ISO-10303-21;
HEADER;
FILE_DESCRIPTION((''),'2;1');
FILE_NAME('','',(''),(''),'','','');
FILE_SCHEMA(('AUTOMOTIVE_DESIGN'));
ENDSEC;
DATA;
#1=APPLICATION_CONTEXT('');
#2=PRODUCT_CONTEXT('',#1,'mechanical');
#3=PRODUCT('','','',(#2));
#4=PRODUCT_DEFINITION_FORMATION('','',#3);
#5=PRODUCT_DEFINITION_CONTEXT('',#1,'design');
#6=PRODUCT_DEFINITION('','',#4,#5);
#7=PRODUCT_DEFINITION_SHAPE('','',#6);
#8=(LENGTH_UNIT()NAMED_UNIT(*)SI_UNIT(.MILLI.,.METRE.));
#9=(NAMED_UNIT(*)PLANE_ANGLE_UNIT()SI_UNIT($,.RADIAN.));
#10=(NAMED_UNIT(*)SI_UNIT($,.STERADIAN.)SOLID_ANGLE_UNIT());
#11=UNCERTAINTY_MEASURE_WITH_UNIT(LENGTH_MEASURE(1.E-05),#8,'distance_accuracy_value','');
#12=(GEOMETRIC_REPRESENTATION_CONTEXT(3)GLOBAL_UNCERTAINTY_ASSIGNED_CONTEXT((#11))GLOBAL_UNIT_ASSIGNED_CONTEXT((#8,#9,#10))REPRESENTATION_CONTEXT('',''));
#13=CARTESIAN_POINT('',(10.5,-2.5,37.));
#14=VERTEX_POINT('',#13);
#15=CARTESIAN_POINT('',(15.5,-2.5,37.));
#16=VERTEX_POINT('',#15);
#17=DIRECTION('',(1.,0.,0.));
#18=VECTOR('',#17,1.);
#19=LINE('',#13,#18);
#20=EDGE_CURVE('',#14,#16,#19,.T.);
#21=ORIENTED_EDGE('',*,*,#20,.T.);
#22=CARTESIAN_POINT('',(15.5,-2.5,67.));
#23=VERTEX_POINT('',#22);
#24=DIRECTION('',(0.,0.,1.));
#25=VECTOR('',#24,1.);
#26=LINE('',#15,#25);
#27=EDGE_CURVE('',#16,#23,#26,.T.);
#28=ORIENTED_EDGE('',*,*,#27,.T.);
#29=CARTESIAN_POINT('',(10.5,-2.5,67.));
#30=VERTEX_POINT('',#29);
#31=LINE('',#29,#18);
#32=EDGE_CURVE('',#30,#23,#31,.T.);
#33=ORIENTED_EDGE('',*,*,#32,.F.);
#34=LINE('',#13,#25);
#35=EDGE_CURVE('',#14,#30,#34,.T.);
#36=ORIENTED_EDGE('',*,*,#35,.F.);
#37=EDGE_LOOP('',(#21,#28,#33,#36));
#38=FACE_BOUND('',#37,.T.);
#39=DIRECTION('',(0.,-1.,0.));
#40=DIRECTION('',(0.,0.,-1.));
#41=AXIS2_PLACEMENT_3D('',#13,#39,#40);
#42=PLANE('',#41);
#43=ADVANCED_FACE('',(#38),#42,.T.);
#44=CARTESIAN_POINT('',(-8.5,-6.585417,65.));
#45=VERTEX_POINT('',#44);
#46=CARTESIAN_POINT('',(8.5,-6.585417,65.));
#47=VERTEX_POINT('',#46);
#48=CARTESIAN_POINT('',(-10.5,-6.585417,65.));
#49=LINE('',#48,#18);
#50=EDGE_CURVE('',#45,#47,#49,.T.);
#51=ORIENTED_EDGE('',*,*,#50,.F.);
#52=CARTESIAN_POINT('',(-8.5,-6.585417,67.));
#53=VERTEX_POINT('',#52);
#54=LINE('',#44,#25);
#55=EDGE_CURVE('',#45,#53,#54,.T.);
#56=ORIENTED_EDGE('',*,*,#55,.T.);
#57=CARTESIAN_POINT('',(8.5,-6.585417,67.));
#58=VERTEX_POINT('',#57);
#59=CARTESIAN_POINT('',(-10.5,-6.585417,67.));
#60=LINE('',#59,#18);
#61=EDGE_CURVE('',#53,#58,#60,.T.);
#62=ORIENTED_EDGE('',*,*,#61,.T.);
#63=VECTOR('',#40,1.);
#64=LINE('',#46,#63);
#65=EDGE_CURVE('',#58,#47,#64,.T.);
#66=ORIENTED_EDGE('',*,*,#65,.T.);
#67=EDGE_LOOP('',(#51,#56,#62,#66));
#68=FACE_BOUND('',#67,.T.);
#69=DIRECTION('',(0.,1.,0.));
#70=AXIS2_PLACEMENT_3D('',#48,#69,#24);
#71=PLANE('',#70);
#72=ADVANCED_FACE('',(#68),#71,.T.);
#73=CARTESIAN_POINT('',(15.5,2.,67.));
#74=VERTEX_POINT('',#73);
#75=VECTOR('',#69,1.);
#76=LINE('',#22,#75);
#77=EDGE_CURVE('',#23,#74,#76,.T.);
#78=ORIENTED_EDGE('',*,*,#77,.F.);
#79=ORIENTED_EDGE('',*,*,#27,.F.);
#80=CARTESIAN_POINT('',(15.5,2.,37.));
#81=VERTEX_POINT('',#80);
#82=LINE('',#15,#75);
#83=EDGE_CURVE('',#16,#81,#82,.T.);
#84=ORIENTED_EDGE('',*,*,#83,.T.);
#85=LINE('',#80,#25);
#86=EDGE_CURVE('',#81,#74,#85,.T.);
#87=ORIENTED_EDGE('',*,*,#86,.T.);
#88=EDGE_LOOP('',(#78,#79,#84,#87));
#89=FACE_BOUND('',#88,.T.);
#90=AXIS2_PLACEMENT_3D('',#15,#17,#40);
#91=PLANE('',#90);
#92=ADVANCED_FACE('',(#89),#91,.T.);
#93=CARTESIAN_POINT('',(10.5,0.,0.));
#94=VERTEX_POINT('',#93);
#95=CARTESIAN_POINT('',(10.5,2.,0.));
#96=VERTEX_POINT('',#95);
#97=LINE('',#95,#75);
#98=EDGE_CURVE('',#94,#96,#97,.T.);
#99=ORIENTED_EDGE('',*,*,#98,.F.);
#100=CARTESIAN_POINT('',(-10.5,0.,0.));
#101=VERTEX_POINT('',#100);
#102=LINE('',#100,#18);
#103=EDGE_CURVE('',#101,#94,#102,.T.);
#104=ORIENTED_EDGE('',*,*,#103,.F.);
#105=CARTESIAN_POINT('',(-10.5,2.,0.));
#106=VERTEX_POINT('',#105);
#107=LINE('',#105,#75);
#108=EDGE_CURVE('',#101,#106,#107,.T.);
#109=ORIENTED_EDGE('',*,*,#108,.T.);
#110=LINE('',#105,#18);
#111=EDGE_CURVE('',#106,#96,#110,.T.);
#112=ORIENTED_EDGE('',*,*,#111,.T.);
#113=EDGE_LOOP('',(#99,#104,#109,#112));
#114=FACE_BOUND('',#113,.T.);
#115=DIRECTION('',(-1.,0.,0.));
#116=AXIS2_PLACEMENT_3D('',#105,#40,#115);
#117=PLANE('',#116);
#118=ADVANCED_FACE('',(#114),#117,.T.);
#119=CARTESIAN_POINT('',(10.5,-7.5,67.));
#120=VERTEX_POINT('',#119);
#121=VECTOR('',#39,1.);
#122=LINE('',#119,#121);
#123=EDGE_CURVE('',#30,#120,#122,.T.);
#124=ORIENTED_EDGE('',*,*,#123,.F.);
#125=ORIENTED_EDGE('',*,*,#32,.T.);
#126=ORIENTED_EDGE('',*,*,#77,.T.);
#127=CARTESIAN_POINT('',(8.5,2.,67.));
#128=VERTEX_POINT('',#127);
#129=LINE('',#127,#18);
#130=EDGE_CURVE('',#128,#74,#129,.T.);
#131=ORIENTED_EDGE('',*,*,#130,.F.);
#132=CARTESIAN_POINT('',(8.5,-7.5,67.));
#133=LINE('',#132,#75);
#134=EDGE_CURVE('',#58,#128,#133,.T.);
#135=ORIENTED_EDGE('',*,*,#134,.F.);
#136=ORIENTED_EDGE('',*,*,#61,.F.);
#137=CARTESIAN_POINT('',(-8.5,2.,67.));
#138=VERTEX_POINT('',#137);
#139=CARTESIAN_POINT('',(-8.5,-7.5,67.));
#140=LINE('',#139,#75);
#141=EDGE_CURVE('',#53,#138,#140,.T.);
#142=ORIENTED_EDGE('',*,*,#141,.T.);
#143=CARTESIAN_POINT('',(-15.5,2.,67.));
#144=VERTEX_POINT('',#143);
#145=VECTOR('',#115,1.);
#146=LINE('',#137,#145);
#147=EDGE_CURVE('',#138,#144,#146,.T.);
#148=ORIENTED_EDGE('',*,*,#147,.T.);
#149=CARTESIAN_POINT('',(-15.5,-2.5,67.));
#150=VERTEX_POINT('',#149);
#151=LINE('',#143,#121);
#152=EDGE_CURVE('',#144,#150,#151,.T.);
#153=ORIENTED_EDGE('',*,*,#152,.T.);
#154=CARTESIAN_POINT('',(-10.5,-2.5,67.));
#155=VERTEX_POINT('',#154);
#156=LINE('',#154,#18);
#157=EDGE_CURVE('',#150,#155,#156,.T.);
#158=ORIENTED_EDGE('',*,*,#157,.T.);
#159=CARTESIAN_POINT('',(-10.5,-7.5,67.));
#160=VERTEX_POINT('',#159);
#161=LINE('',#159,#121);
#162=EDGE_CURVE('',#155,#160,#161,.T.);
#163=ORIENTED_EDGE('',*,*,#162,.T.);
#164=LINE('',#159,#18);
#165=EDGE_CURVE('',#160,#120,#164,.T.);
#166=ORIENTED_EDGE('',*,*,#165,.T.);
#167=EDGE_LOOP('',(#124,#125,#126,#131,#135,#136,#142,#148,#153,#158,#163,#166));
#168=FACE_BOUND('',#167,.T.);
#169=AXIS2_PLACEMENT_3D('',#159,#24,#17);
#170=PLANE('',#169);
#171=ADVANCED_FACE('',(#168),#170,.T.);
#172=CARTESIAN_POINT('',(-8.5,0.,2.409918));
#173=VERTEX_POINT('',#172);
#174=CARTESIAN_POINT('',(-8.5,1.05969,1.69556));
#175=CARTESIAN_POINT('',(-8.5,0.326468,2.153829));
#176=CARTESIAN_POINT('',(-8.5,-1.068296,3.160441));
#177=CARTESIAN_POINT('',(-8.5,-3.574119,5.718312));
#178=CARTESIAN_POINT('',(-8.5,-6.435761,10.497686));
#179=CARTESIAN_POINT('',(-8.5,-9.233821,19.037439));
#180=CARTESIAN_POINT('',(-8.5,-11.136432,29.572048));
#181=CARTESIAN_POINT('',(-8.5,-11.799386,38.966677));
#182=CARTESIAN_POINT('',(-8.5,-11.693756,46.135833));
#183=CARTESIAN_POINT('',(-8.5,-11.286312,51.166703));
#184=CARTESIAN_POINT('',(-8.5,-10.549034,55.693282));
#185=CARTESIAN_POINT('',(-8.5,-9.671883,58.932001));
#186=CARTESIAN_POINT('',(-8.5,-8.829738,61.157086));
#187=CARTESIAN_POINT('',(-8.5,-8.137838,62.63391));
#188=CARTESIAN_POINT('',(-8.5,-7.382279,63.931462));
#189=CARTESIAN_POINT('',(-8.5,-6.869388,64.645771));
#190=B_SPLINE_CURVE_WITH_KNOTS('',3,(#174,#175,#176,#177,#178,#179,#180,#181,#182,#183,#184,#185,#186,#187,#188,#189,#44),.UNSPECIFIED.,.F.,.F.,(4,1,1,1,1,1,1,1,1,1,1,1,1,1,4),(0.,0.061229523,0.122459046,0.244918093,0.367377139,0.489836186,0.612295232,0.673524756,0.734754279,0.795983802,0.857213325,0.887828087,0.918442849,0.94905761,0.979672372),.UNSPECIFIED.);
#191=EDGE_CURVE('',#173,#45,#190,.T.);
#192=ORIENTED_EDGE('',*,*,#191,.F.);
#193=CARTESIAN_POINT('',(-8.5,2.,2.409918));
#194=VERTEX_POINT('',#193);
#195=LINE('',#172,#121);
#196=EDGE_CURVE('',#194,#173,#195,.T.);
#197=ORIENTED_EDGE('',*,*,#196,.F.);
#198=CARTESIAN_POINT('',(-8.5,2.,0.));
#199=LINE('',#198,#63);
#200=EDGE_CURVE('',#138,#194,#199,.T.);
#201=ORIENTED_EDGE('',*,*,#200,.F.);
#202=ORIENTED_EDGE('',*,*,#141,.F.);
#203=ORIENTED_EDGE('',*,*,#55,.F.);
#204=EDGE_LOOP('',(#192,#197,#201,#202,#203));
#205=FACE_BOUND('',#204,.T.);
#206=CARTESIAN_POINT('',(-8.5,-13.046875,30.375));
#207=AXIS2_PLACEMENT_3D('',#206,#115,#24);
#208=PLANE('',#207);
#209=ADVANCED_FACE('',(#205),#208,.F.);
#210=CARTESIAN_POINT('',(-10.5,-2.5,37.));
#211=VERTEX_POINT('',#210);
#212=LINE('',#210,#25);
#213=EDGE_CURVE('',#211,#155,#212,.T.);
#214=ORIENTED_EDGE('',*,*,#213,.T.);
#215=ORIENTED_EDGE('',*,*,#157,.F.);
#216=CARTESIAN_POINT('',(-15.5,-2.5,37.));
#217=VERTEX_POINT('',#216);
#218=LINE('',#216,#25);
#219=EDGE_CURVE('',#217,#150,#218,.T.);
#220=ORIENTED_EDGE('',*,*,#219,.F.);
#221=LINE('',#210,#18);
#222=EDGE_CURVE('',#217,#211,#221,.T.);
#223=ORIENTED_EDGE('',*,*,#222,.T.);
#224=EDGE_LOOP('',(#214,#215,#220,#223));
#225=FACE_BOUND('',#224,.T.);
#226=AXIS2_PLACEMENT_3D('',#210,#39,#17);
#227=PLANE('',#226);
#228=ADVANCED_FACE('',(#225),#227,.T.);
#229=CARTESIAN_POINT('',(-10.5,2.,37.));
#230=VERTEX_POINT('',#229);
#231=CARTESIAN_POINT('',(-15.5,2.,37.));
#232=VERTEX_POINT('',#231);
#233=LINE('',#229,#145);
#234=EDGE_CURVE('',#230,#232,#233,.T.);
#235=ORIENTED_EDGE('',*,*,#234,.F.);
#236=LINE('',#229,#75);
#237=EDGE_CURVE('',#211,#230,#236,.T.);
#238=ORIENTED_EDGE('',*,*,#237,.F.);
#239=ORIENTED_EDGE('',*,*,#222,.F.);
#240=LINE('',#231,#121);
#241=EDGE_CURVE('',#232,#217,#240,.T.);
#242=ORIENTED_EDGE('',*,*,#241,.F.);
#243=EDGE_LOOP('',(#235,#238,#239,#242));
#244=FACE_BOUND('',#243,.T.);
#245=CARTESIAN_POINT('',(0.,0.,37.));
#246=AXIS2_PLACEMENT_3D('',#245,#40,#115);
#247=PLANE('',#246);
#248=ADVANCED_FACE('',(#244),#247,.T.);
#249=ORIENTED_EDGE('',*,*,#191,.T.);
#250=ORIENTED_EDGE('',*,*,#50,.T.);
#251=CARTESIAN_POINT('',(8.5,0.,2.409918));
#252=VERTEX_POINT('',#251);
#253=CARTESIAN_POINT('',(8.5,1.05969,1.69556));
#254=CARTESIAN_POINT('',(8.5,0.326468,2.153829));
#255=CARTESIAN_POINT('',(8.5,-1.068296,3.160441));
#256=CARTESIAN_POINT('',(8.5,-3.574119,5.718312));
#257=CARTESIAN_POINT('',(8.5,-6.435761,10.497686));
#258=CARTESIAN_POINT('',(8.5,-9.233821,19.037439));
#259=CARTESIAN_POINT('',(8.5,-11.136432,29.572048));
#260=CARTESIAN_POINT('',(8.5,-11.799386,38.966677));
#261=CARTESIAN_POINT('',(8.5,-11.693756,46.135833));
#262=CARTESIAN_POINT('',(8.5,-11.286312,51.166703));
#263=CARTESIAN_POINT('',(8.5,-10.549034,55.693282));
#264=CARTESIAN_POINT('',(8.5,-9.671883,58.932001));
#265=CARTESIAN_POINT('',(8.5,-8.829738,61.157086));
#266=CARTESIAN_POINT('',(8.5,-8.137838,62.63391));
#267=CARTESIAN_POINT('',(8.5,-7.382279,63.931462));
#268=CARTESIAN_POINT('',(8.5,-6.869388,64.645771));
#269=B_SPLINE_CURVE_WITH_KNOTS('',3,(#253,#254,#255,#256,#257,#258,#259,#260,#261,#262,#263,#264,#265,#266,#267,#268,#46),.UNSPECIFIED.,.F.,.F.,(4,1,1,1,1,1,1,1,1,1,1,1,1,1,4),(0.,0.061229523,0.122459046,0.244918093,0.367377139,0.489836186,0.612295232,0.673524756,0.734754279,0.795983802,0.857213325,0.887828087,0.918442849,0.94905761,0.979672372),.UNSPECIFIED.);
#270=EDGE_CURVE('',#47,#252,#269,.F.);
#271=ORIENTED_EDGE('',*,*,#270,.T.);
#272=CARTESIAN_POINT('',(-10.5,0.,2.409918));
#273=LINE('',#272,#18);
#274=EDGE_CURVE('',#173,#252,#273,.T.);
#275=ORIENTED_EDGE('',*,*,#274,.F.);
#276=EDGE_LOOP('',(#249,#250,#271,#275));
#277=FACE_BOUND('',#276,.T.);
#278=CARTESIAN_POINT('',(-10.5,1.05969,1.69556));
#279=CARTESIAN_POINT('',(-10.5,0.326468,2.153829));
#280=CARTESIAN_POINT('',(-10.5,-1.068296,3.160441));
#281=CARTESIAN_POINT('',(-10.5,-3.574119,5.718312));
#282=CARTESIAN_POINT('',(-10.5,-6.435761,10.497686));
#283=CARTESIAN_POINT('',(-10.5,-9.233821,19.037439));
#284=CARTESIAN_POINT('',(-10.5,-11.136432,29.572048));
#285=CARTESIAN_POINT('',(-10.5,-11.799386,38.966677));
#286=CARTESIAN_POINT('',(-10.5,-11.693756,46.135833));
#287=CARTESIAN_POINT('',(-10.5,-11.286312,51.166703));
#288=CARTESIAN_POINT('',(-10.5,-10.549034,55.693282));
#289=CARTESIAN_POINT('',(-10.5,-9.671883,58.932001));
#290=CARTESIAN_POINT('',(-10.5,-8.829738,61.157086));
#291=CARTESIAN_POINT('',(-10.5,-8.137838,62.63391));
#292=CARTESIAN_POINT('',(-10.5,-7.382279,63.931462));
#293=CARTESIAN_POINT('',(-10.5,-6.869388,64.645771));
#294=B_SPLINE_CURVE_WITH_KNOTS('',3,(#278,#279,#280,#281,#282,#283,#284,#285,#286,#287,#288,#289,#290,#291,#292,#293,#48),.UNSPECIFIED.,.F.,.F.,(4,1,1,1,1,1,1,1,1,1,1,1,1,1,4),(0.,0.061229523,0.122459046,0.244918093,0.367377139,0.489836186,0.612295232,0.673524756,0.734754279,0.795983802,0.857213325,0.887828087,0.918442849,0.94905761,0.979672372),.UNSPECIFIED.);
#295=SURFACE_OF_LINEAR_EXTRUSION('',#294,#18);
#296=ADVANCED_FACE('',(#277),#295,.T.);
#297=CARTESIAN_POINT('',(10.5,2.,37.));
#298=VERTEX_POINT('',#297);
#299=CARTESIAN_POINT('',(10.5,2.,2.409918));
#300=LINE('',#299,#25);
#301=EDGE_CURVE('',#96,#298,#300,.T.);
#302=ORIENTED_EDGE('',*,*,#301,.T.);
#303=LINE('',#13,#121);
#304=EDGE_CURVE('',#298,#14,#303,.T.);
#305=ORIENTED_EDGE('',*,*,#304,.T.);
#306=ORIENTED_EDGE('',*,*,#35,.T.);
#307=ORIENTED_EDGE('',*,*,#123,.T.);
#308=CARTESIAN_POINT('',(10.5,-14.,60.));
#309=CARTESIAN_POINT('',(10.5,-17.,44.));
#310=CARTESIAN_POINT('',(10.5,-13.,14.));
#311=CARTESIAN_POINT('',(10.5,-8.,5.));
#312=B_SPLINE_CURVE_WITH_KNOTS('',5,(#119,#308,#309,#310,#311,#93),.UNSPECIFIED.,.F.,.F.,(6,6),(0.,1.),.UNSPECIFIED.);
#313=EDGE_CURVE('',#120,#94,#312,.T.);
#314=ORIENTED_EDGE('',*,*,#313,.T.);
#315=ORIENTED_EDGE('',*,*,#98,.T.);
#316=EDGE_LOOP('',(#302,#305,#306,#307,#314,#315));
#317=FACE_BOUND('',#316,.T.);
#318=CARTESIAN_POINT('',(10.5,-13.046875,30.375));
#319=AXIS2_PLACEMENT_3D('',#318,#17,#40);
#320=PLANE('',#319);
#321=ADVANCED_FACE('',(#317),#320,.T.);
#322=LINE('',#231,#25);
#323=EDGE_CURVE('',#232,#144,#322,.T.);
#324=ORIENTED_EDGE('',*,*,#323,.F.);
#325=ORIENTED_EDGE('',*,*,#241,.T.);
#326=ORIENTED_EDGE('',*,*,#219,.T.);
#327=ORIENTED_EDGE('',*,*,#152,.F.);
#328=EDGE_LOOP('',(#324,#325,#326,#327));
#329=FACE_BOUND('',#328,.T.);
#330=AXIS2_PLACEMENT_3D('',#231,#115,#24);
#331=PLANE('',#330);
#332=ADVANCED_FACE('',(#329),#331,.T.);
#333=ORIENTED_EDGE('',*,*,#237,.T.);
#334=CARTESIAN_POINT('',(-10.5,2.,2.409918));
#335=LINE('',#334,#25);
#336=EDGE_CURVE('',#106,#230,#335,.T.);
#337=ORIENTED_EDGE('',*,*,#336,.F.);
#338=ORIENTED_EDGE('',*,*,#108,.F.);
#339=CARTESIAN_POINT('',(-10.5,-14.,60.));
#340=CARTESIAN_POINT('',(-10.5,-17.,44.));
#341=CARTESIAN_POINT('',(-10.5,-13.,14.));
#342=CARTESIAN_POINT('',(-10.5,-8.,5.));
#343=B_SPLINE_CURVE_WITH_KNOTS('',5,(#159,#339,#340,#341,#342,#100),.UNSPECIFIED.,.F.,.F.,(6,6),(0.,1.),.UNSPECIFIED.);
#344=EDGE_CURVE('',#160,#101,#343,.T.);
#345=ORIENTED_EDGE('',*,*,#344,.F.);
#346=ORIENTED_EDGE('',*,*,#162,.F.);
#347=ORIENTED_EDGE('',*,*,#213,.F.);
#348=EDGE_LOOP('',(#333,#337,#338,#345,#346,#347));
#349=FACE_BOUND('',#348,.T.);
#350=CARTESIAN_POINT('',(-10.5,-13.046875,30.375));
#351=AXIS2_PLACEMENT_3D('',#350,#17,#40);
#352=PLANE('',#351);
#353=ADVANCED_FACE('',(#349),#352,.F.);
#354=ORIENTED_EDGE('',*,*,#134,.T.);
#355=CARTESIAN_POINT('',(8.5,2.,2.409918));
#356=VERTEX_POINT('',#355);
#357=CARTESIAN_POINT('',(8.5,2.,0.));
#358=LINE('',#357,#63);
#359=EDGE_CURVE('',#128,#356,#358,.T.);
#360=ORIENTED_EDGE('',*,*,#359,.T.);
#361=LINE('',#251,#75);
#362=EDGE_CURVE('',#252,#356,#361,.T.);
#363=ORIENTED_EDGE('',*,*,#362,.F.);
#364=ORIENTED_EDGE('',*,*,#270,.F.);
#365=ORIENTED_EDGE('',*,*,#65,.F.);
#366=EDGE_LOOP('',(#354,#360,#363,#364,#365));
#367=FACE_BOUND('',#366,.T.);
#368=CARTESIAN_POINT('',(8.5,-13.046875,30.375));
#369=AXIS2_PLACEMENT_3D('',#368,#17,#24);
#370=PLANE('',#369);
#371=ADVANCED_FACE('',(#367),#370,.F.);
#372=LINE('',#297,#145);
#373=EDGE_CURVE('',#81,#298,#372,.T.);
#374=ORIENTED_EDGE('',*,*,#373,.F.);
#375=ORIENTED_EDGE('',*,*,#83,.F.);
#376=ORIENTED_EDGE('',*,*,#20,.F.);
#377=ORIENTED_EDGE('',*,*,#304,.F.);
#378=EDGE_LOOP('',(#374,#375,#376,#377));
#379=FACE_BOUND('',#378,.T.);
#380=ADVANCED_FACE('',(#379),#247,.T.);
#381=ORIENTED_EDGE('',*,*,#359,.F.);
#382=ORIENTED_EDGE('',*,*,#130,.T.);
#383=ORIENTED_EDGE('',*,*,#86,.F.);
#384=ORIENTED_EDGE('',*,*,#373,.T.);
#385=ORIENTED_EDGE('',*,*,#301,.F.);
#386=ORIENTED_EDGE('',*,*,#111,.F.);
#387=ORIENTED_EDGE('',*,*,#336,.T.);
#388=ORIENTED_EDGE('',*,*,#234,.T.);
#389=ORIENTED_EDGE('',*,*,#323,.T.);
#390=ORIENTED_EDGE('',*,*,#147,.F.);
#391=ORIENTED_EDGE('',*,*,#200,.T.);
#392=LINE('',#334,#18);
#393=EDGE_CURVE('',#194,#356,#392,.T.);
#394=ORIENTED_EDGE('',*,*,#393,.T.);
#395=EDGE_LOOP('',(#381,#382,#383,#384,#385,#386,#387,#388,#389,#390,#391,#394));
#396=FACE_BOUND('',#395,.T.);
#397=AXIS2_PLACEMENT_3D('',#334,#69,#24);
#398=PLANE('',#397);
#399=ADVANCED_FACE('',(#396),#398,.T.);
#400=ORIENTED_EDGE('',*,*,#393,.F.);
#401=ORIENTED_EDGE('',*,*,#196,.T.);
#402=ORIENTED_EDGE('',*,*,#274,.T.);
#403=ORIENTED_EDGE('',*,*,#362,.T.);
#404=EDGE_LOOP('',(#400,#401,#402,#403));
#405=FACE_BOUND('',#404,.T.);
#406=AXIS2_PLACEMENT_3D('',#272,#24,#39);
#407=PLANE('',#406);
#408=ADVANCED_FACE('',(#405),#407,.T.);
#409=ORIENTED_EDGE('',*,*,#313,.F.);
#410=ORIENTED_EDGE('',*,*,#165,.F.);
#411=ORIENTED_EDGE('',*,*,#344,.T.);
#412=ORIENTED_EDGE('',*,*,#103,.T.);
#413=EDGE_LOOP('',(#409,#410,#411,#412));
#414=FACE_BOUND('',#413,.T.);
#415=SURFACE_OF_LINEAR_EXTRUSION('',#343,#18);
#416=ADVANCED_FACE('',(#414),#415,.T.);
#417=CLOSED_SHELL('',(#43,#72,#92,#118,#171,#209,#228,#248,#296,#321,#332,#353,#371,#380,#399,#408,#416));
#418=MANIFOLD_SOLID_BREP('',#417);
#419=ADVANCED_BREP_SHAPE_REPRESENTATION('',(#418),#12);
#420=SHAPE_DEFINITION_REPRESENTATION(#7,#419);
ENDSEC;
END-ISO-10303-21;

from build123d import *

# Parameters (mm, degrees)
BASEPIEDEAPPOGGIO_START = -10.5
BASEPIEDEAPPOGGIO_DEPTH = 21
LATOSINISTRO_DEPTH      = 2
SCHIZZO3_W              = 5
SCHIZZO3_H              = 4.5
ALETTEAGGANCIO_DEPTH    = 30


# Read off the part's stored shape, not the designer's step: BasePiedeAppoggio
with BuildPart() as part:
    # BasePiedeAppoggio outline → BasePiedeAppoggio (new body)
    with BuildSketch(Plane(origin=(0, 0, 0), x_dir=(0, 0, -1), z_dir=(1, 0, 0)).offset(BASEPIEDEAPPOGGIO_START)):
        with BuildLine():
            Line((-67, -6.58541733), (-67, -7.5))
            add(Edge.make_bspline(
                [(-67, -7.5), (-60, -14), (-44, -17), (-14, -13), (-5, -8), (0, 0)],
                knots=[0, 0, 0, 0, 0, 0, 1, 1, 1, 1, 1, 1], degree=5))
            Line((0, 0), (0, 2))
            Line((0, 2), (-2.409917527, 2))
            Line((-2.409917527, 2), (-2.409917527, 0))
            add(Edge.make_bspline(
                [(-2.409917527, 0), (-2.667324323, -0.353402954), (-3.476108464, -1.377540434), (-5.718312008, -3.574118885), (-10.497685703, -6.435761001), (-19.037438877, -9.233820798), (-29.572047533, -11.136431528), (-38.966676556, -11.799385995), (-46.135832891, -11.693755764), (-51.166703498, -11.28631183), (-55.693282116, -10.549034431), (-58.932001396, -9.671882802), (-61.157085706, -8.829738395), (-62.633910182, -8.137838289), (-63.931461685, -7.382278902), (-64.645771008, -6.869387628), (-65, -6.58541733)],
                knots=[0.030225408, 0.030225408, 0.030225408, 0.030225408, 0.061229523, 0.122459046, 0.244918093, 0.367377139, 0.489836186, 0.612295232, 0.673524756, 0.734754279, 0.795983802, 0.857213325, 0.887828087, 0.918442849, 0.94905761, 0.979672372, 0.979672372, 0.979672372, 0.979672372], degree=3))
            Line((-65, -6.58541733), (-67, -6.58541733))
        make_face()
    extrude(amount=BASEPIEDEAPPOGGIO_DEPTH)

    # Schizzo2 → LatoSinistro (add)
    with BuildSketch(Plane.ZY.offset(10.5)):
        with BuildLine():
            Line((67, -7.5), (67, 2))
            Line((67, 2), (0, 2))
            Line((0, 2), (0, 0))
            add(Edge.make_bspline(
                [(67, -7.5), (60, -14), (44, -17), (14, -13), (5, -8), (0, 0)],
                knots=[0, 0, 0, 0, 0, 0, 1, 1, 1, 1, 1, 1], degree=5))
        make_face()
    latosinistro = extrude(amount=-LATOSINISTRO_DEPTH)

    # LatoDestro: LatoSinistro across plane
    add(latosinistro.mirror(Plane(origin=(0, 0, 0), x_dir=(0, 0, 1), z_dir=(1, 0, 0))))

    # Schizzo3 → AletteAggancio (add)
    with BuildSketch(Plane.XY.offset(67)):
        with Locations((-13, -0.25)):
            Rectangle(SCHIZZO3_W, SCHIZZO3_H)
        with Locations((13, -0.25)):
            Rectangle(SCHIZZO3_W, SCHIZZO3_H)
    extrude(amount=-ALETTEAGGANCIO_DEPTH)


solid = part.part
